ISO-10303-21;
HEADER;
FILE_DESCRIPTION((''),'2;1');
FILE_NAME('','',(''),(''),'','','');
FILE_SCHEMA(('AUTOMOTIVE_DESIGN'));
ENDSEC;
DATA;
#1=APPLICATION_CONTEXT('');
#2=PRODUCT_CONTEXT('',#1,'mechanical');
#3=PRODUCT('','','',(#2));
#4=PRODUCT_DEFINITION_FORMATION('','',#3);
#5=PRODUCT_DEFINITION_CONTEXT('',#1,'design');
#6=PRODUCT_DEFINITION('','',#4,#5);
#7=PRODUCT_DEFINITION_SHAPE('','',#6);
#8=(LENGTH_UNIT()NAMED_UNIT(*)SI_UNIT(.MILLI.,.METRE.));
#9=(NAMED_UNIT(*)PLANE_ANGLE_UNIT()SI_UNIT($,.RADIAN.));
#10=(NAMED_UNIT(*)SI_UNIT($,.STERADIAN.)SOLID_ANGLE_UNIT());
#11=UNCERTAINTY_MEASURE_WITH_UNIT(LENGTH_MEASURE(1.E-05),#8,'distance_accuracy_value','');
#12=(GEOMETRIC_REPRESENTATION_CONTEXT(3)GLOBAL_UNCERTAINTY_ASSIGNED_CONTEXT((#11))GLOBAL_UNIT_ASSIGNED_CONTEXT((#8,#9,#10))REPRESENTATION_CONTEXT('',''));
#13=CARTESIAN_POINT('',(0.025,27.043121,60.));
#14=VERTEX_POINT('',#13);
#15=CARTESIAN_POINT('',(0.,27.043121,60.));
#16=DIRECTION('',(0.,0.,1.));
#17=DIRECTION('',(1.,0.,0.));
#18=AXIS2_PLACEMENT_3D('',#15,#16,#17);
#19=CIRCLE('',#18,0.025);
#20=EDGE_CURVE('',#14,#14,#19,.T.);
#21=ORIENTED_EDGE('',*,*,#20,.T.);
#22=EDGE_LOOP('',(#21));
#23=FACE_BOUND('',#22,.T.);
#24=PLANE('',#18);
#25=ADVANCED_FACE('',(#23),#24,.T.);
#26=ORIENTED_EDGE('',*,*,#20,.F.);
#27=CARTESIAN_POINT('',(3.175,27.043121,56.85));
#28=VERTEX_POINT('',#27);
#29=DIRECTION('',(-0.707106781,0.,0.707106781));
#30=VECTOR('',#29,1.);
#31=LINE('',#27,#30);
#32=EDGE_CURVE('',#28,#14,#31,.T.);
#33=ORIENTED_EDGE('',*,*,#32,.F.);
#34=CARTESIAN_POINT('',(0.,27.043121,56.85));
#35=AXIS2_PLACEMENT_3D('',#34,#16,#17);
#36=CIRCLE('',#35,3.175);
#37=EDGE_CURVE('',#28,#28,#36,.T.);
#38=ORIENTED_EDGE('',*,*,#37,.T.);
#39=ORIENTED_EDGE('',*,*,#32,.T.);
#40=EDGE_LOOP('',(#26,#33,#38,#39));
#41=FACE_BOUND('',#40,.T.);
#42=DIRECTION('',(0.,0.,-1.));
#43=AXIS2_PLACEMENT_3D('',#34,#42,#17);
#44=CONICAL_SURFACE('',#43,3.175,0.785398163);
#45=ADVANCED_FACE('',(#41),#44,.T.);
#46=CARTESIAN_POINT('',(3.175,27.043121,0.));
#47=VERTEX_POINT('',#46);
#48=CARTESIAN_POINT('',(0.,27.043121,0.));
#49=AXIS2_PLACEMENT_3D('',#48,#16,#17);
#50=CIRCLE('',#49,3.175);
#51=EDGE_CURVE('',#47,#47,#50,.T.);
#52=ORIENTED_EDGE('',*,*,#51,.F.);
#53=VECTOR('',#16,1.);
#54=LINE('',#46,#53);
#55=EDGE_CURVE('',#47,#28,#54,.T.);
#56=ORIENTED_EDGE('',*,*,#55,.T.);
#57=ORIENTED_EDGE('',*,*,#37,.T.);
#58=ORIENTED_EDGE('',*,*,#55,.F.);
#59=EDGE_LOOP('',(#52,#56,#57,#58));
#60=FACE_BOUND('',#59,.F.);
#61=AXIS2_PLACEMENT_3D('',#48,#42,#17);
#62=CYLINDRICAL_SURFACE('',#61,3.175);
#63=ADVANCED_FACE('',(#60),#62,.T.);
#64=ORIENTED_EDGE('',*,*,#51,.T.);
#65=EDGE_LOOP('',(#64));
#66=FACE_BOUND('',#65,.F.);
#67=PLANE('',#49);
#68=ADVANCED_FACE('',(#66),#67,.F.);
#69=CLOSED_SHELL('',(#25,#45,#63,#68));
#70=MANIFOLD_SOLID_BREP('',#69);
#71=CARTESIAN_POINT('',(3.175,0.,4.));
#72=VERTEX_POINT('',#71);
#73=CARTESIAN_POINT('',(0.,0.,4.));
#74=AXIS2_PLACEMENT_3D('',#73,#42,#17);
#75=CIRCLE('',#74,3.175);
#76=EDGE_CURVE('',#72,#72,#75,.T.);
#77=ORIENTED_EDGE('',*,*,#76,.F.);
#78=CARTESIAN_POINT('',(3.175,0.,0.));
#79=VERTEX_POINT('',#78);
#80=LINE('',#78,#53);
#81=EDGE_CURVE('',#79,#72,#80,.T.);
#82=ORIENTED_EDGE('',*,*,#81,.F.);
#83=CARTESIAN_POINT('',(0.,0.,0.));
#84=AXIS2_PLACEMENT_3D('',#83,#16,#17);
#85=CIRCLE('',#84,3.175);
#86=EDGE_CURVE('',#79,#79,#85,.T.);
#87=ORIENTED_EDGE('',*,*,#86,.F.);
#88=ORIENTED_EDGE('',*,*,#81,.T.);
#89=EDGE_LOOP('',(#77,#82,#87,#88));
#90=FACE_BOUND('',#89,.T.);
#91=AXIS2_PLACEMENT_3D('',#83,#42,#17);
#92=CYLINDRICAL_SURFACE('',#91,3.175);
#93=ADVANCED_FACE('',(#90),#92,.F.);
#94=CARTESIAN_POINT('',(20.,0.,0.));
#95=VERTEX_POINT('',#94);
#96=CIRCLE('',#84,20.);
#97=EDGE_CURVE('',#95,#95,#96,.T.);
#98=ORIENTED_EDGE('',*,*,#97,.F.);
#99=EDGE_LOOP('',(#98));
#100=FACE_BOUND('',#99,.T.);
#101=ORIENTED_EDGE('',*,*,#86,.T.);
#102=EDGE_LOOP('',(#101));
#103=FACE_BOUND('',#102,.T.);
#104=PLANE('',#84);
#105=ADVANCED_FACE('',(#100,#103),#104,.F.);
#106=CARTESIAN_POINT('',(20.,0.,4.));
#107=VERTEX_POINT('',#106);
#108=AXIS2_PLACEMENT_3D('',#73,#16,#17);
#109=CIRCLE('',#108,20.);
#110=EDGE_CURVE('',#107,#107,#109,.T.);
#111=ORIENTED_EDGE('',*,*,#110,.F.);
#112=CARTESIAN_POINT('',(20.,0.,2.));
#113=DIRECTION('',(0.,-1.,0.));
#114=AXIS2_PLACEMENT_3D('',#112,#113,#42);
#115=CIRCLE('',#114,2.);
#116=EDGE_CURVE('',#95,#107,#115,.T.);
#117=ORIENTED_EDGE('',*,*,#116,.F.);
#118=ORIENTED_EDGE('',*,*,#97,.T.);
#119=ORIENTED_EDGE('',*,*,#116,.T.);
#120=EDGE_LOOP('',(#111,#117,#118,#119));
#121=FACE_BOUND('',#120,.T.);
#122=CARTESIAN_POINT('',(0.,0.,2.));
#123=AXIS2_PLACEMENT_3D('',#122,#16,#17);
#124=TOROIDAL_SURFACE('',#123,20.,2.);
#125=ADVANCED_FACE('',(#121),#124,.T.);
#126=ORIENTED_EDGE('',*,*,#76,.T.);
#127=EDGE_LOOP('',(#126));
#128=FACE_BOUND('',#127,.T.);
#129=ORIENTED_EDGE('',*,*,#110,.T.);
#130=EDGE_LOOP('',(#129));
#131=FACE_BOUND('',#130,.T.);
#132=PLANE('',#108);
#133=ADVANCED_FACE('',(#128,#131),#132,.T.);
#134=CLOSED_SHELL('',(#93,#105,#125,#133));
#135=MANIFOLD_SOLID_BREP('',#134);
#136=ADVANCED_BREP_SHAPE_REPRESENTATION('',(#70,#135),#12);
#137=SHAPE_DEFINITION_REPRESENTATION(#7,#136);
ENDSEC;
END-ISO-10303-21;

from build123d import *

# Parameters (mm, degrees)
F1_R     = 3.175
F3_DEPTH = 6
F4_R     = 3.175
F5_DEPTH = 60
F6_SIZE  = 3.15


# Not quite as in the source:
# - a feature names something its author has since deleted; it is built from what else it names


with BuildPart() as f2:
    # F0 (on Front) → F2 (revolve)
    with BuildSketch(Plane.XZ):
        with BuildLine():
            Line((0, 4), (0, 0))
            Line((0, 0), (20, 0))
            ThreePointArc((20, 0), (22, 2), (20, 4))
            Line((20, 4), (0, 4))
        make_face()
    revolve(axis=Axis((0, 0, 2), (0, 0, 1)))

    # F1 (on Top) → F3 (cut)
    with BuildSketch(Plane.XY):
        Circle(F1_R)
    extrude(amount=F3_DEPTH, mode=Mode.SUBTRACT)


with BuildPart() as f5:
    # F4 (on Top) → F5 (new body)
    with BuildSketch(Plane.XY):
        with Locations((0, 27.0431211957)):
            Circle(F4_R)
    extrude(amount=F5_DEPTH)

    # F6
    f6_edges = [f5.edges().sort_by_distance(p)[0] for p in [
        (-3.175, 27.043121, 60),
    ]]
    chamfer(f6_edges, length=F6_SIZE)


solid = Compound([f2.part, f5.part])
